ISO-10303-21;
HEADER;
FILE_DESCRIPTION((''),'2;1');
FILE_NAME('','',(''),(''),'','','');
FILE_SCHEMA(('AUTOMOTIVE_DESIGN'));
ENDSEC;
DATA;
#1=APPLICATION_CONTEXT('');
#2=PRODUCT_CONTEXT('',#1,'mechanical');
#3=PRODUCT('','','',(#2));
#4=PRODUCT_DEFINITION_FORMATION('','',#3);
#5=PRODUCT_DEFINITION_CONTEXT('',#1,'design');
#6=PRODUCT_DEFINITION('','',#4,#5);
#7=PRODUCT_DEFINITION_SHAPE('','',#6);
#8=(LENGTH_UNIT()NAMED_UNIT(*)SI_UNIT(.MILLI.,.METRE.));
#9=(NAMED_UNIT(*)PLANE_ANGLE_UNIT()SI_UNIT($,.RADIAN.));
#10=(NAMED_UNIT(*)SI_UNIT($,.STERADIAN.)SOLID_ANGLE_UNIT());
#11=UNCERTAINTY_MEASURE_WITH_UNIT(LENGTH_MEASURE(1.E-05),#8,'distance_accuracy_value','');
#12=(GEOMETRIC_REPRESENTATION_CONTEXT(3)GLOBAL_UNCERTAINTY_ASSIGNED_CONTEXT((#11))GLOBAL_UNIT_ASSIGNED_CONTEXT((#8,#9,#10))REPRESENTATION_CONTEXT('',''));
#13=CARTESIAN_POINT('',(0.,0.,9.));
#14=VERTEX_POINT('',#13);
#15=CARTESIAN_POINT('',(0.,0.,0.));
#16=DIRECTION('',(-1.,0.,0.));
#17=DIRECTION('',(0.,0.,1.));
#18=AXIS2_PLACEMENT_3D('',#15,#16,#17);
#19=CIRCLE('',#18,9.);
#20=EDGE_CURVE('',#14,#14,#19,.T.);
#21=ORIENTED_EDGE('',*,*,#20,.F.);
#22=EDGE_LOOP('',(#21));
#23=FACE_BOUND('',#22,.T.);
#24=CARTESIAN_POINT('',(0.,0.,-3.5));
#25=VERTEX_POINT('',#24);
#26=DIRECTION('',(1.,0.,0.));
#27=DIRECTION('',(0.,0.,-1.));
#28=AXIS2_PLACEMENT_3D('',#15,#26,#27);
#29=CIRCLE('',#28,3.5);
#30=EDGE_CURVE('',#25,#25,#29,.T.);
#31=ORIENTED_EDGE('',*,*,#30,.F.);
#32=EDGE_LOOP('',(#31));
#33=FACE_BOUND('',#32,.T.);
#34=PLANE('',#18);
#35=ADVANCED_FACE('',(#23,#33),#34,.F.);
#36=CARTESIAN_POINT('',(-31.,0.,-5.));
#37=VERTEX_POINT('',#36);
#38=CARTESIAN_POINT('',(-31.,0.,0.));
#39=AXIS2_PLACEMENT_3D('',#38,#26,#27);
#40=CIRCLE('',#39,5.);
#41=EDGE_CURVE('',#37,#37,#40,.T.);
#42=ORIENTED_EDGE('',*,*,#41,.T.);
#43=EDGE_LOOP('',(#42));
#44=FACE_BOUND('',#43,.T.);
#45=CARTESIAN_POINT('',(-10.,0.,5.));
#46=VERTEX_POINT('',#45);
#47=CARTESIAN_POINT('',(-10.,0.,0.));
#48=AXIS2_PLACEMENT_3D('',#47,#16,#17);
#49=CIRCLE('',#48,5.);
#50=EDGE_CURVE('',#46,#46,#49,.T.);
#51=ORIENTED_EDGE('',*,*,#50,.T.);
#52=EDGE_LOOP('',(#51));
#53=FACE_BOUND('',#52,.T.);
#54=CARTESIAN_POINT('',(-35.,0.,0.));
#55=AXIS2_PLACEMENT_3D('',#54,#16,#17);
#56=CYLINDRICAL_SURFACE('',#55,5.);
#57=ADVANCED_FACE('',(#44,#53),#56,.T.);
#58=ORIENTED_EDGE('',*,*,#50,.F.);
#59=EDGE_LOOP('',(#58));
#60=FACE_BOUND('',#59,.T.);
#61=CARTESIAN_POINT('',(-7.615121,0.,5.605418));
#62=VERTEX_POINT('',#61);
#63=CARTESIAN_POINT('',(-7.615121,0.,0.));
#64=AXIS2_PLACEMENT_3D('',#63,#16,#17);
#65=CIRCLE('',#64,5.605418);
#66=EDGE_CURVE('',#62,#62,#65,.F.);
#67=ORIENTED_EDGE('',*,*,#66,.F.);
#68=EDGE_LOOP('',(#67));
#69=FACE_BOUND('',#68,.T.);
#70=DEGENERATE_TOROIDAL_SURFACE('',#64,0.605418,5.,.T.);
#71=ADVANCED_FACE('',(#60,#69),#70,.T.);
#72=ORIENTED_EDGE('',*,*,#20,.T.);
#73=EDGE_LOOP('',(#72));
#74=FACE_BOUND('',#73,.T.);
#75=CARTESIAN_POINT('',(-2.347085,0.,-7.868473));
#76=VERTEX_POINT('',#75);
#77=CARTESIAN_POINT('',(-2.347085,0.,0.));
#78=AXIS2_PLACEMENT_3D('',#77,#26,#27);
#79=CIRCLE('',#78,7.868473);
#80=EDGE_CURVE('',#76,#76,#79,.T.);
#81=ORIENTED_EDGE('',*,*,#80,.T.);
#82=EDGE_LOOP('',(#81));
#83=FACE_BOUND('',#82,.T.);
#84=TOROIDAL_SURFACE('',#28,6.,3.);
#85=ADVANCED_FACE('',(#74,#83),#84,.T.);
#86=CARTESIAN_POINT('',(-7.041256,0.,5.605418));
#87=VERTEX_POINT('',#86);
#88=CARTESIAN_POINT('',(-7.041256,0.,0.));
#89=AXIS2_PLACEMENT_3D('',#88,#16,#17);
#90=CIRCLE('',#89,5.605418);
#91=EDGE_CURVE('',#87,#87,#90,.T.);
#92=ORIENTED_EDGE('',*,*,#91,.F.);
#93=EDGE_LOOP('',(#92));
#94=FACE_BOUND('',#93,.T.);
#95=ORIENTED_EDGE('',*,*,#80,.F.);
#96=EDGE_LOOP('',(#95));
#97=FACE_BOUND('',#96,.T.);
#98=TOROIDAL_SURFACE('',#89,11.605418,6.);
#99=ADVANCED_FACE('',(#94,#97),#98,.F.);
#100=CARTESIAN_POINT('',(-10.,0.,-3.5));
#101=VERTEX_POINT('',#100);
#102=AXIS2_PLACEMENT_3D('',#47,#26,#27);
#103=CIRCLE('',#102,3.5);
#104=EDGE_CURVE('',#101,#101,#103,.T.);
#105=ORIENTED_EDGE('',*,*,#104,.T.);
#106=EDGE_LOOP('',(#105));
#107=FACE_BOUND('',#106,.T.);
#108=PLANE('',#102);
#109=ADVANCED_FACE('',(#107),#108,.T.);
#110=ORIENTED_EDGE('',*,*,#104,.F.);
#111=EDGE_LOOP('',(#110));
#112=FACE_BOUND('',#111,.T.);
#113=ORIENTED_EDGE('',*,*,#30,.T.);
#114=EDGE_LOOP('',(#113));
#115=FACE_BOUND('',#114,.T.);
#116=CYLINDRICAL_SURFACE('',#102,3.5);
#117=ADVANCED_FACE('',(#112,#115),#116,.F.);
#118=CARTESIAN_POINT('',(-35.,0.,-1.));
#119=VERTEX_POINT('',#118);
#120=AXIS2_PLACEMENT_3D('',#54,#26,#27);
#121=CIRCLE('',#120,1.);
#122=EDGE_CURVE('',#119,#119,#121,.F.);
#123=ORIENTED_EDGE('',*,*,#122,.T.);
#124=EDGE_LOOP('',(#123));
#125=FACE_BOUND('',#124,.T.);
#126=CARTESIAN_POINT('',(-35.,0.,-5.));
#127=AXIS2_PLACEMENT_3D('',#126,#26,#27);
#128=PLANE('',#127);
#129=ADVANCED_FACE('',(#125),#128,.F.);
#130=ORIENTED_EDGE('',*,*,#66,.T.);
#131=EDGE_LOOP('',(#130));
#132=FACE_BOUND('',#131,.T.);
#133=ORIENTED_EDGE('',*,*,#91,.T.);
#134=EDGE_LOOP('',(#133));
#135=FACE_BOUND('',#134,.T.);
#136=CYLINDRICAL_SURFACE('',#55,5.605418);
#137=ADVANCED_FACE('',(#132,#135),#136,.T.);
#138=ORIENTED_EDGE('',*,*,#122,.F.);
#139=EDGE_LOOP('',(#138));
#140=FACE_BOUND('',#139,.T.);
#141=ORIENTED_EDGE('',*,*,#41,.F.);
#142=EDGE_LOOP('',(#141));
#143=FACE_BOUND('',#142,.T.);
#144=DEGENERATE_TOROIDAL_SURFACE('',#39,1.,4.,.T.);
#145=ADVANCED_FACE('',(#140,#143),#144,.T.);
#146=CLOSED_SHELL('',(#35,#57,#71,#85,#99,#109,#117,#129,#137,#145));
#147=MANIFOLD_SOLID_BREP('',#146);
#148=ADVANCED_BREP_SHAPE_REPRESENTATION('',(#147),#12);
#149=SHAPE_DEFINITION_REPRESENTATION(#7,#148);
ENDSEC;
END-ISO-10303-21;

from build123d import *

# Parameters (mm, degrees)
SKETCH2_R          = 3.5
CUT_EXTRUDE1_DEPTH = 10
FILLET7_R          = 3
FILLET8_R          = 6
FILLET9_R          = 5
FILLET10_R         = 4


# Some blends are built 0.0001 mm under size
with BuildPart() as part:
    # Sketch1 → Revolve1 (revolve)
    with BuildSketch(Plane(origin=(0, 0, 0), x_dir=(1, 0, 0), z_dir=(0, 1, 0)), mode=Mode.PRIVATE) as revolve1_sk:
        Polygon((0, 0), (0, 9), (-3, 9), (-3, 5.60541789), (-10, 5.60541789), (-10, 5), (-35, 5), (-35, 0), align=None)
    revolve(revolve1_sk.sketch.rotate(Axis((-35, 0, 0), (1, 0, 0)), 180), axis=Axis((-35, 0, 0), (1, 0, 0)))

    # Sketch2 → Cut-Extrude1 (cut)
    with BuildSketch(Plane(origin=(0, 0, 0), x_dir=(0, 0, -1), z_dir=(1, 0, 0))):
        Circle(SKETCH2_R)
    extrude(amount=-CUT_EXTRUDE1_DEPTH, mode=Mode.SUBTRACT)

    # Fillet7
    fillet7_edges = [part.edges().sort_by_distance(p)[0] for p in [
        (-3, 0, -9),
    ]]
    fillet(fillet7_edges, radius=FILLET7_R - 0.0001)  # a hair under: the kernel refuses the full size

    # Fillet8
    fillet8_edges = [part.edges().sort_by_distance(p)[0] for p in [
        (-3, 0, -5.60541789),
    ]]
    fillet(fillet8_edges, radius=FILLET8_R)

    # Fillet9
    # the kernel refuses this fillet: 5 mm, written as the material it takes off along each edge
    with BuildSketch(Plane(origin=(-10, 0, 0), x_dir=(0, 0, 1), z_dir=(0, 1, 0))) as fillet9_piece_1:
        with BuildLine():
            CenterArc((0.60541789, 2.384879049), FILLET9_R, 331.51192705, 28.48807295)
            Line((5, 0), (5.60541789, 0))
            Line((5.60541789, 0), (5.60541789, 2.384879049))
        make_face()
    revolve(axis=Axis((-10, 0, 0), (1, 0, 0)), mode=Mode.SUBTRACT)

    # Fillet10
    fillet10_edges = [part.edges().sort_by_distance(p)[0] for p in [
        (-35, 0, -5),
    ]]
    fillet(fillet10_edges, radius=FILLET10_R)


solid = part.part
